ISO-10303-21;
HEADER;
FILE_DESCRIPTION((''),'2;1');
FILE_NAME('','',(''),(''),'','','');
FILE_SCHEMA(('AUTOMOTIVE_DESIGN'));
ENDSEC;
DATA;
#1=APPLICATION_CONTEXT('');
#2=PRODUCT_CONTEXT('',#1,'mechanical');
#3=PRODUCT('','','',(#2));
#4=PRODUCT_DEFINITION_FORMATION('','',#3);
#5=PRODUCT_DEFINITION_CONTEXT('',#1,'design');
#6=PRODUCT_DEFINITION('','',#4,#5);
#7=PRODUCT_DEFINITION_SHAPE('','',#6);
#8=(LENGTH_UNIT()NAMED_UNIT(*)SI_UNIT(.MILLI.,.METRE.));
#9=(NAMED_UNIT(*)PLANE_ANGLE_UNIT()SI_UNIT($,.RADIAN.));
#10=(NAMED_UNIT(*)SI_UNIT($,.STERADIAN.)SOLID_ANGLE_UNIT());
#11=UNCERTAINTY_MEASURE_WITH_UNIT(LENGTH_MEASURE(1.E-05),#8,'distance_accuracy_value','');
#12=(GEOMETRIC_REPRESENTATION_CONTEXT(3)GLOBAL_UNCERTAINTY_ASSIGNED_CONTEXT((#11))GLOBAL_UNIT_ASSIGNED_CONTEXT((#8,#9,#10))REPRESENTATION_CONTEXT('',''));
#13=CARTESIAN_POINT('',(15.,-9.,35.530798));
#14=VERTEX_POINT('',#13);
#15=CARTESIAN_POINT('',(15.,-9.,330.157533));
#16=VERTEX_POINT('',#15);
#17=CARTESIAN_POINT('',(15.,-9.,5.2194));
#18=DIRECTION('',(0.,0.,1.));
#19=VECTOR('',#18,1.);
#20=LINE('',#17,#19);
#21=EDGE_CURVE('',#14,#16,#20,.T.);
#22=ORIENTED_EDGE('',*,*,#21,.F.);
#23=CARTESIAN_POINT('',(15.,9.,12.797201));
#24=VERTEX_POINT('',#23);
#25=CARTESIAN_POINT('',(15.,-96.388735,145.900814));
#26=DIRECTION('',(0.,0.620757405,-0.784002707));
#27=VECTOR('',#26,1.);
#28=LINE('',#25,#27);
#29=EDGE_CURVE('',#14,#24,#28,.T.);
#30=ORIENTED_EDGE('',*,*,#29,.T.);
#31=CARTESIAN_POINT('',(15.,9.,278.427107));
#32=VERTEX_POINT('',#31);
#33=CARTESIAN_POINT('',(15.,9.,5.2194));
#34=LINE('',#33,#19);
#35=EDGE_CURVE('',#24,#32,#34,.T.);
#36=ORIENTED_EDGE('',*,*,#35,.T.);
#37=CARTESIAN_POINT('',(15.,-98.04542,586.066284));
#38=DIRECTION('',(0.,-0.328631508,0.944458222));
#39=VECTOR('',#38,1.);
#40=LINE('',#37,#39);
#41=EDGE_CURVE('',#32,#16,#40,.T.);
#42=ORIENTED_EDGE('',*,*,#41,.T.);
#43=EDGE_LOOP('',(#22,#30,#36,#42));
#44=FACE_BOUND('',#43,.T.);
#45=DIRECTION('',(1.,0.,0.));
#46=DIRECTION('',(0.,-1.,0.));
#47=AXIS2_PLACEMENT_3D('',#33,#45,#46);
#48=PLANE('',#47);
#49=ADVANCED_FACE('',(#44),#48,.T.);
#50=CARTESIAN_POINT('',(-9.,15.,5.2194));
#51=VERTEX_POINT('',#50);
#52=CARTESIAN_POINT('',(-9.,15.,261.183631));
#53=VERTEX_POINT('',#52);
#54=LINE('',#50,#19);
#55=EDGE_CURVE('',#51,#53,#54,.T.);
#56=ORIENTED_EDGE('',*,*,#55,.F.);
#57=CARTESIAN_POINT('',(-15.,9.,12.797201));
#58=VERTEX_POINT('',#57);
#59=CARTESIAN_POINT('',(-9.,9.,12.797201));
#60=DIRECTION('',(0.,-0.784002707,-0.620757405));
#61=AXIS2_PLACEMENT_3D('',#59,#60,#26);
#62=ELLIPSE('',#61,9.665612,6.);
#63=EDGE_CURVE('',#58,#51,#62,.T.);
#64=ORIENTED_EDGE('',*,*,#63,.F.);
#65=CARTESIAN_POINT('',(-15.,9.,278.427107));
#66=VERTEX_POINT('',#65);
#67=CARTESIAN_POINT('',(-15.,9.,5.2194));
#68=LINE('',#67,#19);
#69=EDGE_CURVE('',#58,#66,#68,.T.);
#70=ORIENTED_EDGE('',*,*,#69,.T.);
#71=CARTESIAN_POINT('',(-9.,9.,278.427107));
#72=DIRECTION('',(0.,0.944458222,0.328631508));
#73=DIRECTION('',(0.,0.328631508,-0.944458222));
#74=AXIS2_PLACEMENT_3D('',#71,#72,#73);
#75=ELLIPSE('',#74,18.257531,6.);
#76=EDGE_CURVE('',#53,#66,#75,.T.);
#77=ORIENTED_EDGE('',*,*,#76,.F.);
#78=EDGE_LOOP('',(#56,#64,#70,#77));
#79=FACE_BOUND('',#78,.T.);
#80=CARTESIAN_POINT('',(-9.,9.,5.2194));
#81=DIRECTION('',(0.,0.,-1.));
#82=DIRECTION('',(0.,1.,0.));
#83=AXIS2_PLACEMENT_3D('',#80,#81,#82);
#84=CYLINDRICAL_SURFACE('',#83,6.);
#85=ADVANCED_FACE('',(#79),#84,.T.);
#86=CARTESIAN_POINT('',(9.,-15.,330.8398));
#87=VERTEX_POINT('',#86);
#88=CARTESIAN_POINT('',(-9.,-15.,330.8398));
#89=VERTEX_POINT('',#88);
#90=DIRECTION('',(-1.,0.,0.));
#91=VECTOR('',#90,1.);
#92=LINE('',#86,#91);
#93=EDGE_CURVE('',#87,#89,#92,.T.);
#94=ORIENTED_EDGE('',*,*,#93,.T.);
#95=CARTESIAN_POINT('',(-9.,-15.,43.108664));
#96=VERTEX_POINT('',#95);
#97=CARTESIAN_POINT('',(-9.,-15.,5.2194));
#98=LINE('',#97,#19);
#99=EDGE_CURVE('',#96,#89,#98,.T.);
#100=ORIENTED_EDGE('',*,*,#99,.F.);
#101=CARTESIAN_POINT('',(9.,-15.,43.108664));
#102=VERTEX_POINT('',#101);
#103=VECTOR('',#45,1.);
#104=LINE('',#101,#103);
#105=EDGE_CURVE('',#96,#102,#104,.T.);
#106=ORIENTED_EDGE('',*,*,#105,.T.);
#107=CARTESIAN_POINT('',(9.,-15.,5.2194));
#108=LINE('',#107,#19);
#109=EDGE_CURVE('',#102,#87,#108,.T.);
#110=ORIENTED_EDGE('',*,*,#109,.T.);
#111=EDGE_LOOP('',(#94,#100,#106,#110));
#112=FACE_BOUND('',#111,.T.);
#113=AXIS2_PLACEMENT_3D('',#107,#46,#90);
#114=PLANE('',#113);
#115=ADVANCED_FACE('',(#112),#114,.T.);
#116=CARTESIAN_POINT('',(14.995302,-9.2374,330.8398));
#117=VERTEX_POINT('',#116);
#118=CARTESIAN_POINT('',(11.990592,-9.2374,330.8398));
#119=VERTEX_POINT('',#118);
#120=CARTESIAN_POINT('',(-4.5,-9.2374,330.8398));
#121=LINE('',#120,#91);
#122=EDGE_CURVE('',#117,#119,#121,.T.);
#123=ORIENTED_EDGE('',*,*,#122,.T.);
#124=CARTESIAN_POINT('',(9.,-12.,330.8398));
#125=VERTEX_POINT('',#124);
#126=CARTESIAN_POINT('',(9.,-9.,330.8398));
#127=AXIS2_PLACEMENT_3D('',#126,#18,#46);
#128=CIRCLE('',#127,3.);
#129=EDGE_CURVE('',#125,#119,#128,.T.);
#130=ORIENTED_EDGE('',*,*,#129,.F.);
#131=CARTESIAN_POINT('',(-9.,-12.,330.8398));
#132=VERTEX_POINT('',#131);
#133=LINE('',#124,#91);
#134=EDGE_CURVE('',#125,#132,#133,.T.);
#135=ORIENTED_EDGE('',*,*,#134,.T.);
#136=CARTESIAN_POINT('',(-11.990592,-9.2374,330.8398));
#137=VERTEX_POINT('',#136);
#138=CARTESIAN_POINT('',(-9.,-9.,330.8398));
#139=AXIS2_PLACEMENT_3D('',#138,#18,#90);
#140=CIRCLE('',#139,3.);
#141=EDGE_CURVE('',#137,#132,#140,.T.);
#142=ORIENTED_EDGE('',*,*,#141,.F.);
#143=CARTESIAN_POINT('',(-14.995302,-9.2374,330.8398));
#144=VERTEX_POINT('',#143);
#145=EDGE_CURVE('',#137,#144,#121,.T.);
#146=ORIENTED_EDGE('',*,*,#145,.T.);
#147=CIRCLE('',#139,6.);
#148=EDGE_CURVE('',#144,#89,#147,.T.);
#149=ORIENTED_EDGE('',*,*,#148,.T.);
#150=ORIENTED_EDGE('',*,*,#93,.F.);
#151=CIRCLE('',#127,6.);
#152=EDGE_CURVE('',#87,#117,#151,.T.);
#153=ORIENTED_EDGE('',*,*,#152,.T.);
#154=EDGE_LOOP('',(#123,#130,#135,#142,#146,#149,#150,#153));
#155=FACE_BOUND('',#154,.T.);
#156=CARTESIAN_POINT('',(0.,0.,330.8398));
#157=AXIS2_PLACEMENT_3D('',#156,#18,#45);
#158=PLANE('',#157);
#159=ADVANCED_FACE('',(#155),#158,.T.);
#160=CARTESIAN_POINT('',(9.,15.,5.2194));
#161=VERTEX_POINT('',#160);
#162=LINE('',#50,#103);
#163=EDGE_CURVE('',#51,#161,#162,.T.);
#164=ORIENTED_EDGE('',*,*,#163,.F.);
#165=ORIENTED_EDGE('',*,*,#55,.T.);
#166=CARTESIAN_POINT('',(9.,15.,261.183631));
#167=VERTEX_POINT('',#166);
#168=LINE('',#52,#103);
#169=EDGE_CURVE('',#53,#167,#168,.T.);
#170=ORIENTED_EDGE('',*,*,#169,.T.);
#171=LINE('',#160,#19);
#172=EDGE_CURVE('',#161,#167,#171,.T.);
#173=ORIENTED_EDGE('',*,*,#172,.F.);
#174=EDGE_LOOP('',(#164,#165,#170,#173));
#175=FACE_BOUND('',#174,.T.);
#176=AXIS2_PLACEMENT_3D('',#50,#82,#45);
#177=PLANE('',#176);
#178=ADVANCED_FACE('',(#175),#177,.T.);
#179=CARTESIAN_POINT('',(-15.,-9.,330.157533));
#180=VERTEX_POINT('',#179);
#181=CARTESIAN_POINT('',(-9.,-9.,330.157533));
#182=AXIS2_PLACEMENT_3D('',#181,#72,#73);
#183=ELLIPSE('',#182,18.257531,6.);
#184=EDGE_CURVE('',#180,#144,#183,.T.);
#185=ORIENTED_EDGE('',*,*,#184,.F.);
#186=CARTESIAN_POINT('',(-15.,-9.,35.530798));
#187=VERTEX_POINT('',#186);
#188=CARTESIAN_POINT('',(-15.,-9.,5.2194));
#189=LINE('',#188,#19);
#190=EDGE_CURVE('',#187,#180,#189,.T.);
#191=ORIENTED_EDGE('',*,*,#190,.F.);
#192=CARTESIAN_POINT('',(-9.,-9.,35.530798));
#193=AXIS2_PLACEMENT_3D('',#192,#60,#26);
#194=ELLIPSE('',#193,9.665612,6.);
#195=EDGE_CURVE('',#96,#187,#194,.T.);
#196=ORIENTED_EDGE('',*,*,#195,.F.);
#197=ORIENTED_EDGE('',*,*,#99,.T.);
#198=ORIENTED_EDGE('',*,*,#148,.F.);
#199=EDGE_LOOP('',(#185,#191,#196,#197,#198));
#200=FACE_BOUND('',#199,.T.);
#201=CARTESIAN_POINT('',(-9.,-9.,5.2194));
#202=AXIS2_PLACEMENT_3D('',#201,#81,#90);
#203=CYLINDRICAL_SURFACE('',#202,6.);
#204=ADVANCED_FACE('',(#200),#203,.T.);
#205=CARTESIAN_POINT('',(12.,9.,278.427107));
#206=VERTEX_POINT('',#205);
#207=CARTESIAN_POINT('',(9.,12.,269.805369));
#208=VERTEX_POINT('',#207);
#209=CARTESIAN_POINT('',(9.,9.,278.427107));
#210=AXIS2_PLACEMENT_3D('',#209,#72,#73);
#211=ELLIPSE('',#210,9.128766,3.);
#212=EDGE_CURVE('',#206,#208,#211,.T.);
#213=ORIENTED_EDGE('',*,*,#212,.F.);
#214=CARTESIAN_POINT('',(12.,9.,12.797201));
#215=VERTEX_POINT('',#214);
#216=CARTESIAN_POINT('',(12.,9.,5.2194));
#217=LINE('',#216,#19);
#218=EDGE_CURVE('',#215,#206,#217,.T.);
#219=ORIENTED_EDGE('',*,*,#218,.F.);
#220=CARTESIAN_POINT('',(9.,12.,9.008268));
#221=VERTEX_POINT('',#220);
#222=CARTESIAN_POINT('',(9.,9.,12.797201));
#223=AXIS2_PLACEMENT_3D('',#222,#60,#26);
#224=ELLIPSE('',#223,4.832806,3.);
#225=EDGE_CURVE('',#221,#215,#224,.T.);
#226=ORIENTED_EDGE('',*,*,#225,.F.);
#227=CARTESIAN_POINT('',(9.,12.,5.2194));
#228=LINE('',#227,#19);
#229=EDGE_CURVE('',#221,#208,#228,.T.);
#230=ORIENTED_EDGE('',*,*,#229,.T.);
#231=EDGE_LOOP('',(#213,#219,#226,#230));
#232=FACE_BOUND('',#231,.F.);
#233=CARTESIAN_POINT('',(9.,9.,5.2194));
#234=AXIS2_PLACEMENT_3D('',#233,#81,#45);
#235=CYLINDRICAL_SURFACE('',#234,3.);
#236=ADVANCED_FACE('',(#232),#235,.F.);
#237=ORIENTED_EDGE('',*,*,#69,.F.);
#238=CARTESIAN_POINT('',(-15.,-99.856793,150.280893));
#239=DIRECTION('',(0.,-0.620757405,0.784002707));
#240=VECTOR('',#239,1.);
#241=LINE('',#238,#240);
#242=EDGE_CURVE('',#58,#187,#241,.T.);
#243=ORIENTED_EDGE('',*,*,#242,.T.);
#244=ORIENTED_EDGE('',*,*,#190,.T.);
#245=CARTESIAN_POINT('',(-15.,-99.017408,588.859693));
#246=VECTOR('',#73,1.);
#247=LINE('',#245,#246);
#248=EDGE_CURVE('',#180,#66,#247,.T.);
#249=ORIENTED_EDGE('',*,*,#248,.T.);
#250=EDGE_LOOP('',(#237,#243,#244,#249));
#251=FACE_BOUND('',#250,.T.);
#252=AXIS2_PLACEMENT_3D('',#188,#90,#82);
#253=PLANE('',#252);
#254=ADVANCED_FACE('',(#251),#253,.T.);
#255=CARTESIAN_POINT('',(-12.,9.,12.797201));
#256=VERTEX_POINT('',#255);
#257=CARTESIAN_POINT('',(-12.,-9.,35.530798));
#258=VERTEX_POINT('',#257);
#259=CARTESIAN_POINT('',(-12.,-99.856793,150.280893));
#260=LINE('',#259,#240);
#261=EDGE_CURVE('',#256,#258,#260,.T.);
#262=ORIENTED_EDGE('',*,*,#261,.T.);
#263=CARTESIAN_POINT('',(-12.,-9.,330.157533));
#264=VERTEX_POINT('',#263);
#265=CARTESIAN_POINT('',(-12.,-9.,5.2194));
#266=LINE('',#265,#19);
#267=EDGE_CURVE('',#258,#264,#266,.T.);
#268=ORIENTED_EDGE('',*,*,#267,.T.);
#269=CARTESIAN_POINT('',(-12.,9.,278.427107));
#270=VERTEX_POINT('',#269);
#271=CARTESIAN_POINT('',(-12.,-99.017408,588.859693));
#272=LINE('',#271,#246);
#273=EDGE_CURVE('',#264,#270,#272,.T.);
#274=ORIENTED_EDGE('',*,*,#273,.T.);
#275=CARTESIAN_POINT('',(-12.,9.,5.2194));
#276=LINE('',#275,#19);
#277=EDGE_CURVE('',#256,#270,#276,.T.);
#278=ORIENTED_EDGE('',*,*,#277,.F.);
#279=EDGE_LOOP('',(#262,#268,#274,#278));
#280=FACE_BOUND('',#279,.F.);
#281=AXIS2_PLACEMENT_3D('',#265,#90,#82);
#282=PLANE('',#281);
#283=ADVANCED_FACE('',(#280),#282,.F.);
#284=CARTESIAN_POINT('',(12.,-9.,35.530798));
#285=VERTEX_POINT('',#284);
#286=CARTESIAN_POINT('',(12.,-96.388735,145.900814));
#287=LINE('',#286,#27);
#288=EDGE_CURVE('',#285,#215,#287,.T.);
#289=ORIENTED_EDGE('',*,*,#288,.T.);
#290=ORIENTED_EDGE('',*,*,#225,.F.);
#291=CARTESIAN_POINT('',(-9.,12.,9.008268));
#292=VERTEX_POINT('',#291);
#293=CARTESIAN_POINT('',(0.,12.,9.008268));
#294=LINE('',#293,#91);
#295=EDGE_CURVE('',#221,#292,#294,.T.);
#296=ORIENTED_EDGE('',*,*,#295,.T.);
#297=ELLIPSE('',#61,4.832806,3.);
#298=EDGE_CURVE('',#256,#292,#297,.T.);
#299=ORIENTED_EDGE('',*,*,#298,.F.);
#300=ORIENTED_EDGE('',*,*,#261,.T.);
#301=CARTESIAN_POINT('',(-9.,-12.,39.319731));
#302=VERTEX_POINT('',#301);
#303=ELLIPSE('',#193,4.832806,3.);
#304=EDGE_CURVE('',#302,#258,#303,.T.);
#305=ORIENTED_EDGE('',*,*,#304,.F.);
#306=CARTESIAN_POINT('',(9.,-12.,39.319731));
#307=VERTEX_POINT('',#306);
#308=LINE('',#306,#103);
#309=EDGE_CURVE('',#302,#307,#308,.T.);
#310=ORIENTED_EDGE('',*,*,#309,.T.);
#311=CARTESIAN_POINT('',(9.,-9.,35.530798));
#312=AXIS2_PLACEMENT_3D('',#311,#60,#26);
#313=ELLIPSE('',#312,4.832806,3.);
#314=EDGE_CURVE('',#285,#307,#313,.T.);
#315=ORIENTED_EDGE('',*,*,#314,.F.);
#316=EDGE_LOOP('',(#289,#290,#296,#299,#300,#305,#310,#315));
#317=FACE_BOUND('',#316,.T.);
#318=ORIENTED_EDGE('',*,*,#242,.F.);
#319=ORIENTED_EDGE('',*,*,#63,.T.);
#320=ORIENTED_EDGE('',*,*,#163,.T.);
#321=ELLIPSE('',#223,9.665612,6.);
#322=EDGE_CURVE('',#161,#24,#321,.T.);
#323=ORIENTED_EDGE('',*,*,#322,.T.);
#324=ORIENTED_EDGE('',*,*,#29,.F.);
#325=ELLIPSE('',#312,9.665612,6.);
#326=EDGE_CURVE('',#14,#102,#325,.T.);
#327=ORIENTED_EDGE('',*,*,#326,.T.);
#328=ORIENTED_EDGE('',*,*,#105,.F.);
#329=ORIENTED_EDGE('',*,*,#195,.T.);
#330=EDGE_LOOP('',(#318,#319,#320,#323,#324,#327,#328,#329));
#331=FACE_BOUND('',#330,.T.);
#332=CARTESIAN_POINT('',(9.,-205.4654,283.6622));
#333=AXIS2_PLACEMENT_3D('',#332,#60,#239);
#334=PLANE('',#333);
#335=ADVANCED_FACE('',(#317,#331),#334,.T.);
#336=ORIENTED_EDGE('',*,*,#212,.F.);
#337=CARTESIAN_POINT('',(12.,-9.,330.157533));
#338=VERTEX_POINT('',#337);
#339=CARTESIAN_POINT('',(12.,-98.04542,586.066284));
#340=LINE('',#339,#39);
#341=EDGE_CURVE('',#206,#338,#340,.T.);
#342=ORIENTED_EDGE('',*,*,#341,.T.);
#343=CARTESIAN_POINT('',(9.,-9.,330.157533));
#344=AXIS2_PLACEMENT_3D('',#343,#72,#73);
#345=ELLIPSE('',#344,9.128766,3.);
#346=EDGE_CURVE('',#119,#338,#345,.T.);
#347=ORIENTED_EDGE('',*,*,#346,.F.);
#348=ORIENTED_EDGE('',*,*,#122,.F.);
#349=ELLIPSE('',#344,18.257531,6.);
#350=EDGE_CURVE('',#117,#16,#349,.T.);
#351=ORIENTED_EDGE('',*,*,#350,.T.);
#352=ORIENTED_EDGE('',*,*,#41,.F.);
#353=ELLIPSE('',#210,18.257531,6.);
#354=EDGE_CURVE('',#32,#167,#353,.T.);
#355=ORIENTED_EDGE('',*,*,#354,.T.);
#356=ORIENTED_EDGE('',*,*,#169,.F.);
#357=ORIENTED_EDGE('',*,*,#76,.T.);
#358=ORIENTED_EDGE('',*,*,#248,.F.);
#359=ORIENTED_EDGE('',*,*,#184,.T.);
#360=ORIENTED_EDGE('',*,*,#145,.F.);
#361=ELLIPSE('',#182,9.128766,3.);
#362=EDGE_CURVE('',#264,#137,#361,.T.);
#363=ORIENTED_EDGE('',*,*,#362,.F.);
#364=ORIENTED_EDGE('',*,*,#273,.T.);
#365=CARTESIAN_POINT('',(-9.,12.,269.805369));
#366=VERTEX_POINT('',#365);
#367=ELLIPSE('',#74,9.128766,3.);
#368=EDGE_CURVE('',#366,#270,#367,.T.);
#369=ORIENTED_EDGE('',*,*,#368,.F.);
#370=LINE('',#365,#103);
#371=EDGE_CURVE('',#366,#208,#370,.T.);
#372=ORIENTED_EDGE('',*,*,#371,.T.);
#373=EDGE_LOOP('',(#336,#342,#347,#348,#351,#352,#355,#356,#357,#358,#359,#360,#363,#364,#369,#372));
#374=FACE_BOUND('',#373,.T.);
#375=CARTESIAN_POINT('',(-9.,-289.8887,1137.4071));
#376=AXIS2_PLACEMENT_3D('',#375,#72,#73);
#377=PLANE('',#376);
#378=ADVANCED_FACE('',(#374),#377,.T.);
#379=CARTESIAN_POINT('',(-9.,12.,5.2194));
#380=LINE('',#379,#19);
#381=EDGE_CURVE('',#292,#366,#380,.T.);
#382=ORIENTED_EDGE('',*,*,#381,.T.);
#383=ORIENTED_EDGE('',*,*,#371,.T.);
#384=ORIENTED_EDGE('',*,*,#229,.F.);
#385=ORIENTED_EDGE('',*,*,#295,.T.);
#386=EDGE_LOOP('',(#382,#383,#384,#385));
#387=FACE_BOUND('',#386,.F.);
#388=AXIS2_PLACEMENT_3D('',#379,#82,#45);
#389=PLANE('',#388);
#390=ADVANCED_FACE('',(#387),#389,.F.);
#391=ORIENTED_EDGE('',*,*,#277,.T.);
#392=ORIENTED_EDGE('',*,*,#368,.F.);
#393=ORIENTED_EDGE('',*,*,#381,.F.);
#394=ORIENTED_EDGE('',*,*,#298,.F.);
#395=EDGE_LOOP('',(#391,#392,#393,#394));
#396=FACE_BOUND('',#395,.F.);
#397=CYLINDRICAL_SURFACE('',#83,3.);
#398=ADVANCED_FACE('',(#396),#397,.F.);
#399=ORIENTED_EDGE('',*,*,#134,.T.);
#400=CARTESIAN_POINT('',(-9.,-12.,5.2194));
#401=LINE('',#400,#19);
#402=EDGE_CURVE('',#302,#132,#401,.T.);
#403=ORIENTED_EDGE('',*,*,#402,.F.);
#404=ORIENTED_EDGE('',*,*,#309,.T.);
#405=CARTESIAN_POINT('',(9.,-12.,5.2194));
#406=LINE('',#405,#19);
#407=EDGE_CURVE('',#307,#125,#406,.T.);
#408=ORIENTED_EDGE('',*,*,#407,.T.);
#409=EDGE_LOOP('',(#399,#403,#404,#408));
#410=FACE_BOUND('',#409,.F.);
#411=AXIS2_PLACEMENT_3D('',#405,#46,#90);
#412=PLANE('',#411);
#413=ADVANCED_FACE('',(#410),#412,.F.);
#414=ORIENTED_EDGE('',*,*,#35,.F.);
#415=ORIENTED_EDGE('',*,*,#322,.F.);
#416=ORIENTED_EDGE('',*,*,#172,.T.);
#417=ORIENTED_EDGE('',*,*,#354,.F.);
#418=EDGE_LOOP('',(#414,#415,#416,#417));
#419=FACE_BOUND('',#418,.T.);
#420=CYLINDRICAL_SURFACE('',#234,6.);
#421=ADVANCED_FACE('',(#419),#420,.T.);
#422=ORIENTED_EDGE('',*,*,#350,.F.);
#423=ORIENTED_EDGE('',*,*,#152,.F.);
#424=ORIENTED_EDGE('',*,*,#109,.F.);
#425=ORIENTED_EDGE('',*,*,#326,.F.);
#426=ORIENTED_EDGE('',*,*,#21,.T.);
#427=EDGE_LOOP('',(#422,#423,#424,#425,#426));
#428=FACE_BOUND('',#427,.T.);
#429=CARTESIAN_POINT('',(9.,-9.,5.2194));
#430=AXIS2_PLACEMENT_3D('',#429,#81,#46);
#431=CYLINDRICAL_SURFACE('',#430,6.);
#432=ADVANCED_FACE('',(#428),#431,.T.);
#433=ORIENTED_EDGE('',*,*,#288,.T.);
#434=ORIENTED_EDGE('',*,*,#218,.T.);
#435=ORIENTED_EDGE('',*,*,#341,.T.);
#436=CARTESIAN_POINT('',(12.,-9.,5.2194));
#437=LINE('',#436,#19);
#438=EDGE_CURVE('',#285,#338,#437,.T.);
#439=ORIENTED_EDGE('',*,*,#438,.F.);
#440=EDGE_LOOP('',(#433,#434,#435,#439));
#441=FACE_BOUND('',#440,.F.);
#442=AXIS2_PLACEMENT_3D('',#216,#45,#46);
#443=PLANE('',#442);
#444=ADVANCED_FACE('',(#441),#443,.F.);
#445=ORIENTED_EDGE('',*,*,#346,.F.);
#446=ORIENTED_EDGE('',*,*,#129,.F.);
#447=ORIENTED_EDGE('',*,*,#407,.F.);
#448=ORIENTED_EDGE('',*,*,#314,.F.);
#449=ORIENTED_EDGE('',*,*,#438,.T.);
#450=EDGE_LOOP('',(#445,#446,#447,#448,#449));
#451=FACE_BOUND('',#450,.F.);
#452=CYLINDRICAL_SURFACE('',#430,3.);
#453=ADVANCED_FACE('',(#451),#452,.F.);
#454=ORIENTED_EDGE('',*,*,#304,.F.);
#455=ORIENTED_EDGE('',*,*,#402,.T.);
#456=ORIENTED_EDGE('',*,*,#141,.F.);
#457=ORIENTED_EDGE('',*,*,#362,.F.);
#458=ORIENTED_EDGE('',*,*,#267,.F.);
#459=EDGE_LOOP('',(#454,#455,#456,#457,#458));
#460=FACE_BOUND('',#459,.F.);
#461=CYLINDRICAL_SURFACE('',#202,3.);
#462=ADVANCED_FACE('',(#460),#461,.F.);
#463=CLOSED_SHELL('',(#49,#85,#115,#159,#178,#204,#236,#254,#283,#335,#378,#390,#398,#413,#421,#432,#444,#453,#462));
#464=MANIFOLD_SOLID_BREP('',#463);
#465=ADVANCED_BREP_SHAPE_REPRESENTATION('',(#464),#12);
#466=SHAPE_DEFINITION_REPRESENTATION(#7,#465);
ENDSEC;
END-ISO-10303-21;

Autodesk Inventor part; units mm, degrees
ref_plane "Start Plane" through (0, 0, 5.2194) normal (0, 0, 1) x (1, 0, 0)
ref_plane "End Plane" through (0, 0, 330.8397) normal (0, 0, 1) x (1, 0, 0)
sketch "Sketch" plane through (0, 0, 0) normal (0, 0, 1) x (1, 0, 0)
  line L0 (-15, -9) -> (-15, 9)
  line L1 (-9, 15) -> (9, 15)
  line L2 (15, 9) -> (15, -9)
  line L3 (9, -15) -> (-9, -15)
  arc A0 (-15, -9) -> (-9, -15) centre (-9, -9) ccw
  arc A1 (-9, 15) -> (-15, 9) centre (-9, 9) ccw
  arc A2 (15, 9) -> (9, 15) centre (9, 9) ccw
  arc A3 (9, -15) -> (15, -9) centre (9, -9) ccw
  arc A4 (-9, 12) -> (-12, 9) centre (-9, 9) ccw
  line L4 (-9, 12) -> (9, 12)
  arc A5 (12, 9) -> (9, 12) centre (9, 9) ccw
  line L5 (12, 9) -> (12, -9)
  arc A6 (9, -12) -> (12, -9) centre (9, -9) ccw
  line L6 (9, -12) -> (-9, -12)
  arc A7 (-12, -9) -> (-9, -12) centre (-9, -9) ccw
  line L7 (-12, -9) -> (-12, 9)
  line L8 (0, 22.7397) -> (0, -22.7397) construction
  line L9 (-22.7397, 0) -> (22.7397, 0) construction
  dimension "d7" = 6
  dimension "d10" = 30
  dimension "d11" = 30
  dimension "d12" = 3
  dimension "d15" = 15
  dimension "d16" = 15
extrude "Body" add sketch "Sketch" along normal up to surface (325.6204 mm away) from surface at 5.2194
sketch "Sketch3" plane through (0, 0, 0) normal (0, 0, 1) x (1, 0, 0)
  line L0 (0, 0) -> (10, 0)
ref_plane "Work Plane3" through (0, 0, 0) normal (0, -1, 0) x (1, 0, 0)
ref_plane "Work Plane4" through (-9, -289.8887, 1137.4071) normal (0, 0.9444582, 0.3286315) x (1, 0, 0)
split "Split1" plane through (-9, -289.8887, 1137.4071) removes the side toward (0, 0.9444582, 0.3286315)
ref_plane "Work Plane5" through (9, -205.4654, 283.6622) normal (0, -0.7840027, -0.6207574) x (1, 0, 0)
split "Split2" plane through (9, -205.4654, 283.6622) removes the side toward (0, -0.7840027, -0.6207574)
sketch "Sketch4" plane through (0, 0, 0) normal (0, -1, 0) x (1, 0, 0)
  line L0 (-2, 5.2194) -> (12, 5.2194) projected
  line L1 (-2, 330.8397) -> (12, 330.8397) projected
  dimension "d18" = 325.6204
equation "\"d7\" = G_IR"
equation "\"d10\" = G_H"
equation "\"d11\" = G_W"
equation "\"d12\" = G_T"
equation "\"d15\" = 0.5 * d10"
equation "\"d16\" = 0.5 * d11"
equation "\"d3\" = G_L"
equation "\"G_W\" = 30"
equation "\"G_H\" = 30"
equation "\"G_T\" = 3"
equation "\"G_IR\" = 6"
equation "\"G_L\" = d18"
equation "\"G_OFFSET_START\" = -5.21936"
equation "\"G_OFFSET_END\" = -19.09635"
equation "\"d13\" = -G_OFFSET_START"
equation "\"d14\" = G_OFFSET_END + B_L"
equation "\"B_L\" = 349.93607"
properties part number "DIN EN 10219-2 - 30 x 30 x 3  - 325.62" material "Steel, Mild"
